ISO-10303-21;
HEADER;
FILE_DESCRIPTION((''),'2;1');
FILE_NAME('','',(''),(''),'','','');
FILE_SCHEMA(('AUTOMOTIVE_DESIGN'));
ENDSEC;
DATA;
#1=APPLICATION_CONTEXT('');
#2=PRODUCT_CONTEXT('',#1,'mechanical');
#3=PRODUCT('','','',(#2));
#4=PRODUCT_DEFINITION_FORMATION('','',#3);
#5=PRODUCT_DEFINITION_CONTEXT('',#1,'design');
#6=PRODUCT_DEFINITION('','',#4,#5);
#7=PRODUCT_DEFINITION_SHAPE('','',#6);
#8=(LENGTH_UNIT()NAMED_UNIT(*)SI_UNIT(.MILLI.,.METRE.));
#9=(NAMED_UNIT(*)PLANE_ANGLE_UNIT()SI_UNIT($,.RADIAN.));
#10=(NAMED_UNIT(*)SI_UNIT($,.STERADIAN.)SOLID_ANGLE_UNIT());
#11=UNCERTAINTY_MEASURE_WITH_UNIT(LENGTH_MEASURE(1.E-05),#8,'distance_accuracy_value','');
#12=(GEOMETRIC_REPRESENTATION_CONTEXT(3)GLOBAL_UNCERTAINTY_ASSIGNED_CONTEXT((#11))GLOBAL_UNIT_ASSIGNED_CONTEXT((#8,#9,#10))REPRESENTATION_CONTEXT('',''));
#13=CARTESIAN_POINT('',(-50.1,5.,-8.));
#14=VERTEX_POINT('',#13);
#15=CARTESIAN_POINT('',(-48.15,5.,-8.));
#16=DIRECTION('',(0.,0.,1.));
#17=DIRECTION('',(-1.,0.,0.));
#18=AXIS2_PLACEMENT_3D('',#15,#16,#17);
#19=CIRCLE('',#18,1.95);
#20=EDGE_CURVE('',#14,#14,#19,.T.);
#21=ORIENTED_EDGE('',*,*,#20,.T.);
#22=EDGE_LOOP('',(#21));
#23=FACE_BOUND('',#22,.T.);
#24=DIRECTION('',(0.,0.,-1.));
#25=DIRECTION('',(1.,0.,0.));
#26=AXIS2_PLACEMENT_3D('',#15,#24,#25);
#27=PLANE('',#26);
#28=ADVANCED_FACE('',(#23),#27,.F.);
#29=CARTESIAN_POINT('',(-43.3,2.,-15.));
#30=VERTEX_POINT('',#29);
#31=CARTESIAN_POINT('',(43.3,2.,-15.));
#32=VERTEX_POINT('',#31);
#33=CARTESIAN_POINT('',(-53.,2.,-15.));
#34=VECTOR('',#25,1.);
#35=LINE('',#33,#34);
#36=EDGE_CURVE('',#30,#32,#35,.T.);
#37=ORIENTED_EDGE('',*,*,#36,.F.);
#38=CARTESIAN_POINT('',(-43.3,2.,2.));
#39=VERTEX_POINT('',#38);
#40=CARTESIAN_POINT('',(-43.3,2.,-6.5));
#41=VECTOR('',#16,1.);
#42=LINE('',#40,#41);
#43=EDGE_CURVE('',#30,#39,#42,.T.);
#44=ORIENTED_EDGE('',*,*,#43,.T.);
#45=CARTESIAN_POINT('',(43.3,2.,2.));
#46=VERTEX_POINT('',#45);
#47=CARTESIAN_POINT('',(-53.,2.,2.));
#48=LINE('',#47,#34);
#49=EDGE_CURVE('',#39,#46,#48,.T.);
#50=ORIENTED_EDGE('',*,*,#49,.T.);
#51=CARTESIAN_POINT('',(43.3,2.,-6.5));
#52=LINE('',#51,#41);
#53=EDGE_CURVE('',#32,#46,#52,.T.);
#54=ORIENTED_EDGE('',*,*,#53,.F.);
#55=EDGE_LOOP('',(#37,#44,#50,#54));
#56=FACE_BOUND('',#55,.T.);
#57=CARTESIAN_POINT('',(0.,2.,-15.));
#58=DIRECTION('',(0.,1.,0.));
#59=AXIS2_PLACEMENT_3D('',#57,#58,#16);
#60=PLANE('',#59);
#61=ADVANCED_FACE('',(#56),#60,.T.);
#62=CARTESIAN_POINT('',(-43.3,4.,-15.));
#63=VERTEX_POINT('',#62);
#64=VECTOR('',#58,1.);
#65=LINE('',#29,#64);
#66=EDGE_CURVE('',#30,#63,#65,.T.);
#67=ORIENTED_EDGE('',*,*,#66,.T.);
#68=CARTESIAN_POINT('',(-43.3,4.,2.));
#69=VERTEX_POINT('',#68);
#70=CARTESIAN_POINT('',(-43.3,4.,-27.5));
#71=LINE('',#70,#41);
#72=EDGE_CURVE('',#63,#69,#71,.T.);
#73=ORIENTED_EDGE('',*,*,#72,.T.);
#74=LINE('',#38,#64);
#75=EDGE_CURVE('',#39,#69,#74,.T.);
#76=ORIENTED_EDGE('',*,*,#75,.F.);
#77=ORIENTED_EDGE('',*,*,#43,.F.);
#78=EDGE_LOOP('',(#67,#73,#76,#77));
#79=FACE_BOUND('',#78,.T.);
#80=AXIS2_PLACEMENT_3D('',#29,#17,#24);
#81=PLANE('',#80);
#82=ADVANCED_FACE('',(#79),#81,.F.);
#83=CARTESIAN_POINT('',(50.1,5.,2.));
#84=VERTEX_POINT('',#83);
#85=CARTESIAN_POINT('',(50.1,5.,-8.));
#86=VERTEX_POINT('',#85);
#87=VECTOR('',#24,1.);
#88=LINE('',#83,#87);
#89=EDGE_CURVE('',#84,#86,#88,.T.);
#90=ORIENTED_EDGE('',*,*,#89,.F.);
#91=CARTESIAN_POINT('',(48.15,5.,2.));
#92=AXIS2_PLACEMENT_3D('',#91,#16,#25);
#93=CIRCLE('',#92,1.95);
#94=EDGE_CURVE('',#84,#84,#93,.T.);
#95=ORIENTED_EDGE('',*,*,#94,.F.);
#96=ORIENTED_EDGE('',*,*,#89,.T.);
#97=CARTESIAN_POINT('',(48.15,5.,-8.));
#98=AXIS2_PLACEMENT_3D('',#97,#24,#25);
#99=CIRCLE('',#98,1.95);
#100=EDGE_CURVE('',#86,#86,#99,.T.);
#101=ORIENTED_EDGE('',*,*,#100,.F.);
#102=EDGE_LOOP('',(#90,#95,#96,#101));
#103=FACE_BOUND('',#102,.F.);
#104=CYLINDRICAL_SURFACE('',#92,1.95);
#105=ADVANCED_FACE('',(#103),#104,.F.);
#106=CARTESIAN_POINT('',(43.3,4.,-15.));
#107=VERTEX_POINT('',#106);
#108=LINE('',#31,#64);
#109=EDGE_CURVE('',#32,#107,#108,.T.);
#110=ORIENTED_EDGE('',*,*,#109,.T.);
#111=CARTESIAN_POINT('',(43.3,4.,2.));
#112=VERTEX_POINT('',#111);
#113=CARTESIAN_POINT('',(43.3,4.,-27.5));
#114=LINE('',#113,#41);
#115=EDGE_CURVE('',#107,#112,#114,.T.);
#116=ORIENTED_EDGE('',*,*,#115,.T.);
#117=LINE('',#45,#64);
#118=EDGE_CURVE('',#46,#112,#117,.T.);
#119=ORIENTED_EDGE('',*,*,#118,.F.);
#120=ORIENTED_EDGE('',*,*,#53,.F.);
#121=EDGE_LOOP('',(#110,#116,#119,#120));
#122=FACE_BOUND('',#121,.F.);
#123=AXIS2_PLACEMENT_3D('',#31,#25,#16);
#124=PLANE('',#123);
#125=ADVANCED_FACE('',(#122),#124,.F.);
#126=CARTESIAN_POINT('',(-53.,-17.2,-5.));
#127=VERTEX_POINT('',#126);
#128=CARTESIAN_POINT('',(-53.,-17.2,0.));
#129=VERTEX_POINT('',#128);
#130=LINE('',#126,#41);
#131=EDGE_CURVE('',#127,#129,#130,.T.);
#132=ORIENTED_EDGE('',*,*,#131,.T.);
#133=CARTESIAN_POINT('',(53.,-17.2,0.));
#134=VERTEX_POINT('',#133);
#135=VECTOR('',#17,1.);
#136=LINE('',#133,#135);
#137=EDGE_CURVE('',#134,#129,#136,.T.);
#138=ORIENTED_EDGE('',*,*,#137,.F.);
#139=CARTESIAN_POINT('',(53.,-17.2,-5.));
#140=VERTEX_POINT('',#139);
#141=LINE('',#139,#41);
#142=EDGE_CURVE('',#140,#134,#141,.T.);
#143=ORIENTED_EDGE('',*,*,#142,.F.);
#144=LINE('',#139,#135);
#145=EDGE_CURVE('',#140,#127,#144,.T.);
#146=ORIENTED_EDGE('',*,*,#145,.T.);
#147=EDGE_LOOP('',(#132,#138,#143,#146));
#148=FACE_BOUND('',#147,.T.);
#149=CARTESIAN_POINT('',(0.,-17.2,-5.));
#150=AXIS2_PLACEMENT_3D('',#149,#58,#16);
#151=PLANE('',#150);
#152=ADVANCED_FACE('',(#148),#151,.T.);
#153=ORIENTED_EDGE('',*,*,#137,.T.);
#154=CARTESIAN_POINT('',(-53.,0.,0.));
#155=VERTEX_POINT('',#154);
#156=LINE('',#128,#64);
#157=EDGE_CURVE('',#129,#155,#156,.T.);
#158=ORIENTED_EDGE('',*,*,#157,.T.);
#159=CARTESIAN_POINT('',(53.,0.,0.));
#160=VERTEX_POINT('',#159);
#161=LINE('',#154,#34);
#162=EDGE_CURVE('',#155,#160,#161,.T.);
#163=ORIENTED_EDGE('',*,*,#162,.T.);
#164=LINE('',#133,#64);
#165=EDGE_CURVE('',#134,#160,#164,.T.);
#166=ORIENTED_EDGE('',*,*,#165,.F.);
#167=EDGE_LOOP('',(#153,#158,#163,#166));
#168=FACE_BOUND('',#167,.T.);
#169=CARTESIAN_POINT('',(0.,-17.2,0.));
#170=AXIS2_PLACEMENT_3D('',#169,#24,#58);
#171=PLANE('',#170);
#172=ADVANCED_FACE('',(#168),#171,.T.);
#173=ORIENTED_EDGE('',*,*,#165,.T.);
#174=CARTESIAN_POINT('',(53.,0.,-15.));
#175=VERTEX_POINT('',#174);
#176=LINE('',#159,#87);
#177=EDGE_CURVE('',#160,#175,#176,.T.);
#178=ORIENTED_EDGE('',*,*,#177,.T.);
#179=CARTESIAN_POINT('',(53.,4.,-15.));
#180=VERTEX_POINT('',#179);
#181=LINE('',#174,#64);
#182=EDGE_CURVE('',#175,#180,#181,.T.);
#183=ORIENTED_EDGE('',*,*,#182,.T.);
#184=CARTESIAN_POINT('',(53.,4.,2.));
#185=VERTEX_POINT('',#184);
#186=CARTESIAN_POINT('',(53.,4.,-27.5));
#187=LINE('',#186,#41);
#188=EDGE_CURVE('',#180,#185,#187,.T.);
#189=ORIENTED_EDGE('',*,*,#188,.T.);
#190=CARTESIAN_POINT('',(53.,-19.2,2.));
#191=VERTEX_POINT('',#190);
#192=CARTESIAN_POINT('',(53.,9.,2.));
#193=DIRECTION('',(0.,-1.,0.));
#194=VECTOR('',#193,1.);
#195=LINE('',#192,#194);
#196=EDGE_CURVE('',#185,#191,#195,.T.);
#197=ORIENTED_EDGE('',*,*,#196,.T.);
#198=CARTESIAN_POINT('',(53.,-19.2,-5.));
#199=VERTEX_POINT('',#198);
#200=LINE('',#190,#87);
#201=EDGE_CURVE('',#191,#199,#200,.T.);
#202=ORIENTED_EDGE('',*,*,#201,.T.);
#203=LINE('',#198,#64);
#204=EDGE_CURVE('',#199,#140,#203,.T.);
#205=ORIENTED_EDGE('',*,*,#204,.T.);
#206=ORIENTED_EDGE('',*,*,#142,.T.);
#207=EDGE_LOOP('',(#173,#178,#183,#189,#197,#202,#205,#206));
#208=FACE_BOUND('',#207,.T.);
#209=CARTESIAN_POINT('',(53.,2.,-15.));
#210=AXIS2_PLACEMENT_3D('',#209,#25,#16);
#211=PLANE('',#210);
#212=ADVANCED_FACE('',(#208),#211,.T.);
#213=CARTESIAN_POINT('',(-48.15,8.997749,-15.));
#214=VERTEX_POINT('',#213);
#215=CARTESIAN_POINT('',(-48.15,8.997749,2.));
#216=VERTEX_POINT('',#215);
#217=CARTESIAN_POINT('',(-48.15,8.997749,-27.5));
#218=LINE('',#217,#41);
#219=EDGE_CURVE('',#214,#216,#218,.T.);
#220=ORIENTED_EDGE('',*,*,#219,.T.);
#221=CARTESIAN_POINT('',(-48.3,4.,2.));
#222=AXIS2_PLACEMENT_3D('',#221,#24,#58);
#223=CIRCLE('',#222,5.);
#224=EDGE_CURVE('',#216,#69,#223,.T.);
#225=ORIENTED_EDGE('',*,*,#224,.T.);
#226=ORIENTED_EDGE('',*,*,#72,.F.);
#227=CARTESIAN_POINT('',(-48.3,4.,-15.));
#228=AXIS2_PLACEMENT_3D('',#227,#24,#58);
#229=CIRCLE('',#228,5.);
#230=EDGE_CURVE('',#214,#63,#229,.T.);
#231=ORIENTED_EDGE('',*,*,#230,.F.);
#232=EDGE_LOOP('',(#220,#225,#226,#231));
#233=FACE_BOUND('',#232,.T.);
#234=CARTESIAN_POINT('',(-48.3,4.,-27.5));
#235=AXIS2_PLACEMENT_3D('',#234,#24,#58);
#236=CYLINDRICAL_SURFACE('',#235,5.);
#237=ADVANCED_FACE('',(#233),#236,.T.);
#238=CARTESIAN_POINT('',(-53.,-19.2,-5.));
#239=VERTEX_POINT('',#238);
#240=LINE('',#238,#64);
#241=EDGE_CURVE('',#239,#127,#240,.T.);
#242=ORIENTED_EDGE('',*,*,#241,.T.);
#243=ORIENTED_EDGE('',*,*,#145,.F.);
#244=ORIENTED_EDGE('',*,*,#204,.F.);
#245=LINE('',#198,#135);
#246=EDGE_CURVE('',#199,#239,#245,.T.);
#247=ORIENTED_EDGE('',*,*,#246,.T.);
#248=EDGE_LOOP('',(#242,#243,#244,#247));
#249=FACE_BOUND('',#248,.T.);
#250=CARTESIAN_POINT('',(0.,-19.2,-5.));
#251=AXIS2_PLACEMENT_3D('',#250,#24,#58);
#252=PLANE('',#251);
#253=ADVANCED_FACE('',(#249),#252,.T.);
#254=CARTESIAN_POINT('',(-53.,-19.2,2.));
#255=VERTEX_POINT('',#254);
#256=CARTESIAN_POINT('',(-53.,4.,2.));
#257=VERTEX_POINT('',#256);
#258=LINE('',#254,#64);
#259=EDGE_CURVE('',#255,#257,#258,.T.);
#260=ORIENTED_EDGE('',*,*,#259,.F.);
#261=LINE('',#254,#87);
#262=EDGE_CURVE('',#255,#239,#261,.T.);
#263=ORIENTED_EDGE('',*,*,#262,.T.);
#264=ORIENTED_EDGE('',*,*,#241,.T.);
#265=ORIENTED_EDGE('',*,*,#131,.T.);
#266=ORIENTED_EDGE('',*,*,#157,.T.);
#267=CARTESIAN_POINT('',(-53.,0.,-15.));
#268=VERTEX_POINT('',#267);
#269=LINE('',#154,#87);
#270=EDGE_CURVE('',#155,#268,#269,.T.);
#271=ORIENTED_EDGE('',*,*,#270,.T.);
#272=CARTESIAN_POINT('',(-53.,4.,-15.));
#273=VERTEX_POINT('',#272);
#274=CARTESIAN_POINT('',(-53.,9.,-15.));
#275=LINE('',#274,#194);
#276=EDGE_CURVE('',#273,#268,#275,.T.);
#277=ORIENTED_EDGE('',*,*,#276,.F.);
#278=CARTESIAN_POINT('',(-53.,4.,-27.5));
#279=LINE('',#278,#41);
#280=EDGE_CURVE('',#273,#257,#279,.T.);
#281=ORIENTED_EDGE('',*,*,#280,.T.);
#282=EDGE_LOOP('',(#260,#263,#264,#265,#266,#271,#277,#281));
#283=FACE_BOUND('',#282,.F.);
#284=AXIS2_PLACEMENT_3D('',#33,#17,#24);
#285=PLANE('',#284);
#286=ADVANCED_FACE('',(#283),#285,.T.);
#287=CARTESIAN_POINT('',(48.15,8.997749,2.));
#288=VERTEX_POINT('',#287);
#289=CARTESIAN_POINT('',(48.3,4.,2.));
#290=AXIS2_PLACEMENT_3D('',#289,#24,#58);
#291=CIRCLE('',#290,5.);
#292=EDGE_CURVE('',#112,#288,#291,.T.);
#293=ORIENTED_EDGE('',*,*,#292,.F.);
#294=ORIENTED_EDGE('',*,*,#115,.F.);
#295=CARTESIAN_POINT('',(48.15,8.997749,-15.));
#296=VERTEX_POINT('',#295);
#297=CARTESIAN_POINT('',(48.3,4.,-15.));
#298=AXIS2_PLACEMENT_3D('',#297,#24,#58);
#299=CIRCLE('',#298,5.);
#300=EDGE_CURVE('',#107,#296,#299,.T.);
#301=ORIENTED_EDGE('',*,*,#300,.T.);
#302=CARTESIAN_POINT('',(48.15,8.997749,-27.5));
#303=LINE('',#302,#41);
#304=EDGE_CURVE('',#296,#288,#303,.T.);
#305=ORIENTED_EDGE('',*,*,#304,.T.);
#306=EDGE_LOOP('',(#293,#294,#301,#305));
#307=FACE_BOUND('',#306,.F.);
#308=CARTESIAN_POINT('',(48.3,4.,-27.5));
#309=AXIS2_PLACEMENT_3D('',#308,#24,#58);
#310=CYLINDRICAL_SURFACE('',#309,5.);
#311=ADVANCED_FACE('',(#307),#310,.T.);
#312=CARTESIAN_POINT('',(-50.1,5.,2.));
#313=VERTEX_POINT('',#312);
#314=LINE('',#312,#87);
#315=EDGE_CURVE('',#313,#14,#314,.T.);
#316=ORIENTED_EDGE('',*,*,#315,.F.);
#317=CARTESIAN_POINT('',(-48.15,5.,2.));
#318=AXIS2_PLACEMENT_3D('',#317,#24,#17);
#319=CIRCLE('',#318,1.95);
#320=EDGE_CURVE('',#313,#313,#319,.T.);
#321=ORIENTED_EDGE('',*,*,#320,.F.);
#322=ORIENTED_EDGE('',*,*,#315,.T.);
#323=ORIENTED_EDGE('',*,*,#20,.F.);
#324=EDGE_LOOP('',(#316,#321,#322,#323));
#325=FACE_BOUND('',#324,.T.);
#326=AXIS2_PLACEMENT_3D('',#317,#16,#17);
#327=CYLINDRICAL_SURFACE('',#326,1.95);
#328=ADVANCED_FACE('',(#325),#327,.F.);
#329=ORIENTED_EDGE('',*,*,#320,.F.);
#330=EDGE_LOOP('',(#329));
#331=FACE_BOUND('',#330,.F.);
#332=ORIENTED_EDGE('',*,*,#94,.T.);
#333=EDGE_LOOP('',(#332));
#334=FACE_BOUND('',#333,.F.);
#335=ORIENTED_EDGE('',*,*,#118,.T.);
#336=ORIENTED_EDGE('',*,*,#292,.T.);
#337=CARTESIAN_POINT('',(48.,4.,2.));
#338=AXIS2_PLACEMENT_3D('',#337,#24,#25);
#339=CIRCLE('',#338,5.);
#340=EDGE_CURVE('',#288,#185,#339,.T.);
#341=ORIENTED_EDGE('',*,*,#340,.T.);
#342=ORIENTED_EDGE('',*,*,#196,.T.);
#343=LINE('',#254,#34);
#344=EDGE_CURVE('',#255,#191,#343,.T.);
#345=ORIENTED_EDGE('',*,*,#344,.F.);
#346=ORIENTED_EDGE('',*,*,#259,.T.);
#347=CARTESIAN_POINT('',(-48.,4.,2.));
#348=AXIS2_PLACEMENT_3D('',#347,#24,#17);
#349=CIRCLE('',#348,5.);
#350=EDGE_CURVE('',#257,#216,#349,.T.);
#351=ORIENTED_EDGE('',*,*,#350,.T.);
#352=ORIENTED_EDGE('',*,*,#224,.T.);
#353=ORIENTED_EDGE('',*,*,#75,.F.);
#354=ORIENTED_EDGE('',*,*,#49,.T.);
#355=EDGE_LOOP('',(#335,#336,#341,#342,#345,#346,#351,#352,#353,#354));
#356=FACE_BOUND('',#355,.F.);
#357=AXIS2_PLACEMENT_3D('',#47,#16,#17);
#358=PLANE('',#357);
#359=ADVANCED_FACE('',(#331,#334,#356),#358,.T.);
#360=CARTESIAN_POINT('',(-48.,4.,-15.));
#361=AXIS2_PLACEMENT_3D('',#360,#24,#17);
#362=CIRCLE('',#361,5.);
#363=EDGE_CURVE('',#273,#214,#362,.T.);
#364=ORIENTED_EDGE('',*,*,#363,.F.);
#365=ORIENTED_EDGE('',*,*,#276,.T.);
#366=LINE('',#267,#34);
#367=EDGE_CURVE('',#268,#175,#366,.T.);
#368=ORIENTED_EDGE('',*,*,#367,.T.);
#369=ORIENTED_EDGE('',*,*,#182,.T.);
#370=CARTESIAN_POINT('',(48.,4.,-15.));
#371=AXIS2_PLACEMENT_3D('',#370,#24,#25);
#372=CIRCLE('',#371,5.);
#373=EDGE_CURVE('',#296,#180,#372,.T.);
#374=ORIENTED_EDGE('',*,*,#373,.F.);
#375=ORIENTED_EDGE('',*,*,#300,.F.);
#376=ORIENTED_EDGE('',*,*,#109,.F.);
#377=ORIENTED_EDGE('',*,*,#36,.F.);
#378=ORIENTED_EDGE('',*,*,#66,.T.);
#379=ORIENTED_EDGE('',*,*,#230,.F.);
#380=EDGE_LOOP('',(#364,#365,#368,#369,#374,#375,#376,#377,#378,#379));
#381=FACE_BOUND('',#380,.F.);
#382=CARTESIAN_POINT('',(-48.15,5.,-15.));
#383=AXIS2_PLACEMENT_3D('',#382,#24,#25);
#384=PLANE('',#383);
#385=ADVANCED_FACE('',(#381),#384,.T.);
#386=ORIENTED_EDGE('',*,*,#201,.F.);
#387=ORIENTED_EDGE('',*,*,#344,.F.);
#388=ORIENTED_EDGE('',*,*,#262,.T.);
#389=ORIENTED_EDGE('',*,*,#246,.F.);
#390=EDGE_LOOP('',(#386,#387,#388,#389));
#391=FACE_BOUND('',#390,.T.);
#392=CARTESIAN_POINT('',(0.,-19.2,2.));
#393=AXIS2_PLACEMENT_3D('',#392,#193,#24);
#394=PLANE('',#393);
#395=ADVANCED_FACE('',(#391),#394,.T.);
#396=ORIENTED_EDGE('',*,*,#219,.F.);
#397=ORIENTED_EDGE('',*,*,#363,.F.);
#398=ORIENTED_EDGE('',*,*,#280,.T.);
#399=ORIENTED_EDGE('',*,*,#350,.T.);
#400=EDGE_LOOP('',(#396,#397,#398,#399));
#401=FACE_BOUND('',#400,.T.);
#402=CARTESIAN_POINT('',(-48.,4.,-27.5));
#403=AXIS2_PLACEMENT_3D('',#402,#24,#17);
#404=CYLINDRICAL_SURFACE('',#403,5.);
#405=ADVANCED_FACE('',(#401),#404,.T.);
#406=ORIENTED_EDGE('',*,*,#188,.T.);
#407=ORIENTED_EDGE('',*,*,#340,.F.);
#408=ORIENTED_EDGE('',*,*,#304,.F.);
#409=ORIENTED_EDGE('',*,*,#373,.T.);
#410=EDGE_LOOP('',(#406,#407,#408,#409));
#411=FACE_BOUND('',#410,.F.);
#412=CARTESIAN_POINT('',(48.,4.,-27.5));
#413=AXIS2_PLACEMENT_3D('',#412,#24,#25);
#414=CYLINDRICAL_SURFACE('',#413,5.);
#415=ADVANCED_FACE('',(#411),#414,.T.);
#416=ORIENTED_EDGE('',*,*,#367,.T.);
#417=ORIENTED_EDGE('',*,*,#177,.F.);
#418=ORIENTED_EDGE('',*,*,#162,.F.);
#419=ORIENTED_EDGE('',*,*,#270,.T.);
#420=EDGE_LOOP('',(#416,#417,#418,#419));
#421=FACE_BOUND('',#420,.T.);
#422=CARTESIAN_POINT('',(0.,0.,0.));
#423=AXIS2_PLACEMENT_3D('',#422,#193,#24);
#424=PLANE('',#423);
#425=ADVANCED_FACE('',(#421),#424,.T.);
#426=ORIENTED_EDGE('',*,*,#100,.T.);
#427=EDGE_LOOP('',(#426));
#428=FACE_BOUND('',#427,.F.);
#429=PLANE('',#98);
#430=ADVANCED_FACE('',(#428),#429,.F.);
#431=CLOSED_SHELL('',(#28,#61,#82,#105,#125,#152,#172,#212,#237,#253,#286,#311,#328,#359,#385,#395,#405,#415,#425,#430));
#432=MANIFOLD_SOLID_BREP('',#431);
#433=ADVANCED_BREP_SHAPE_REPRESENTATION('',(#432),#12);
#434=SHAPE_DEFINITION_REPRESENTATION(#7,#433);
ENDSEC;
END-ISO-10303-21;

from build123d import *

# Parameters (mm, degrees)
F1_DEPTH    = 53
F2_W        = 9.7
F2_H        = 17
F3_DEPTH    = 7
F4_R        = 1.95
F5_DEPTH    = 25
F6_T1_DEPTH = 42
F7_R        = 1.95
F8_DEPTH    = 7


# Not quite as in the source:
# - a fillet or chamfer that OpenCascade refuses, or shapes differently, is made with other operations: its cross-section is extruded or revolved along the edge and cut away or added
# - a pattern or mirror of a feature is missing from the dataset's text; its kind, count and spacing are read off the source's solid


with BuildPart() as f1:
    # F0 (on Right) → F1 (new body, symmetric)
    with BuildSketch(Plane.YZ):
        Polygon((-17.2, 0), (0, 0), (0, -15), (2, -15), (2, 2), (-19.2, 2), (-19.2, -5), (-17.2, -5), align=None)
    extrude(amount=F1_DEPTH, both=True)

    # F2 (on face) → F3 (join)
    with BuildSketch(Plane(origin=(0, 2, 0), x_dir=(-1, 0, 0), z_dir=(0, 1, 0))):
        with Locations((-48.15, -6.5)):
            Rectangle(F2_W, F2_H)
    f3 = extrude(amount=F3_DEPTH)

    # F3_copies: F3 across plane
    add(f3.mirror(Plane(origin=(0, 0, 0), x_dir=(0, 0, -1), z_dir=(-1, 0, 0))))

    # F4 (on face) → F5 (cut)
    with BuildSketch(Plane.XY.offset(2)):
        with Locations((48.15, 5)):
            Circle(F4_R)
    f5 = extrude(amount=-F5_DEPTH, mode=Mode.SUBTRACT)

    # F5_copies: F5 across plane
    add(f5.mirror(Plane(origin=(0, 0, 0), x_dir=(0, 0, -1), z_dir=(-1, 0, 0))), mode=Mode.SUBTRACT)

    # F6: fillet of radius 5 on 4 edges, made by hand

    # F6_s2 → F6_t1 (cut)
    with BuildSketch(Plane.XY.offset(-27.5)):
        with BuildLine():
            ThreePointArc((53, 4), (51.5355339059, 7.5355339059), (48, 9))
            Line((48, 9), (53, 9))
            Line((53, 9), (53, 4))
        make_face()
        with BuildLine():
            ThreePointArc((48.3, 9), (44.7644660941, 7.5355339059), (43.3, 4))
            Line((43.3, 4), (43.3, 9))
            Line((43.3, 9), (48.3, 9))
        make_face()
        with BuildLine():
            ThreePointArc((-53, 4), (-51.5355339059, 7.5355339059), (-48, 9))
            Line((-48, 9), (-53, 9))
            Line((-53, 9), (-53, 4))
        make_face()
        with BuildLine():
            ThreePointArc((-48.3, 9), (-44.7644660941, 7.5355339059), (-43.3, 4))
            Line((-43.3, 4), (-43.3, 9))
            Line((-43.3, 9), (-48.3, 9))
        make_face()
    extrude(amount=F6_T1_DEPTH, mode=Mode.SUBTRACT)

    # F7 (on face) → F8 (join)
    with BuildSketch(Plane(origin=(0, 0, -15), x_dir=(1, 0, 0), z_dir=(0, 0, -1))):
        with Locations((48.15, -5)):
            Circle(F7_R)
    f8 = extrude(amount=-F8_DEPTH)

    # F8_copies: F8 across plane
    add(f8.mirror(Plane(origin=(0, 0, 0), x_dir=(0, 0, -1), z_dir=(-1, 0, 0))))


solid = f1.part
